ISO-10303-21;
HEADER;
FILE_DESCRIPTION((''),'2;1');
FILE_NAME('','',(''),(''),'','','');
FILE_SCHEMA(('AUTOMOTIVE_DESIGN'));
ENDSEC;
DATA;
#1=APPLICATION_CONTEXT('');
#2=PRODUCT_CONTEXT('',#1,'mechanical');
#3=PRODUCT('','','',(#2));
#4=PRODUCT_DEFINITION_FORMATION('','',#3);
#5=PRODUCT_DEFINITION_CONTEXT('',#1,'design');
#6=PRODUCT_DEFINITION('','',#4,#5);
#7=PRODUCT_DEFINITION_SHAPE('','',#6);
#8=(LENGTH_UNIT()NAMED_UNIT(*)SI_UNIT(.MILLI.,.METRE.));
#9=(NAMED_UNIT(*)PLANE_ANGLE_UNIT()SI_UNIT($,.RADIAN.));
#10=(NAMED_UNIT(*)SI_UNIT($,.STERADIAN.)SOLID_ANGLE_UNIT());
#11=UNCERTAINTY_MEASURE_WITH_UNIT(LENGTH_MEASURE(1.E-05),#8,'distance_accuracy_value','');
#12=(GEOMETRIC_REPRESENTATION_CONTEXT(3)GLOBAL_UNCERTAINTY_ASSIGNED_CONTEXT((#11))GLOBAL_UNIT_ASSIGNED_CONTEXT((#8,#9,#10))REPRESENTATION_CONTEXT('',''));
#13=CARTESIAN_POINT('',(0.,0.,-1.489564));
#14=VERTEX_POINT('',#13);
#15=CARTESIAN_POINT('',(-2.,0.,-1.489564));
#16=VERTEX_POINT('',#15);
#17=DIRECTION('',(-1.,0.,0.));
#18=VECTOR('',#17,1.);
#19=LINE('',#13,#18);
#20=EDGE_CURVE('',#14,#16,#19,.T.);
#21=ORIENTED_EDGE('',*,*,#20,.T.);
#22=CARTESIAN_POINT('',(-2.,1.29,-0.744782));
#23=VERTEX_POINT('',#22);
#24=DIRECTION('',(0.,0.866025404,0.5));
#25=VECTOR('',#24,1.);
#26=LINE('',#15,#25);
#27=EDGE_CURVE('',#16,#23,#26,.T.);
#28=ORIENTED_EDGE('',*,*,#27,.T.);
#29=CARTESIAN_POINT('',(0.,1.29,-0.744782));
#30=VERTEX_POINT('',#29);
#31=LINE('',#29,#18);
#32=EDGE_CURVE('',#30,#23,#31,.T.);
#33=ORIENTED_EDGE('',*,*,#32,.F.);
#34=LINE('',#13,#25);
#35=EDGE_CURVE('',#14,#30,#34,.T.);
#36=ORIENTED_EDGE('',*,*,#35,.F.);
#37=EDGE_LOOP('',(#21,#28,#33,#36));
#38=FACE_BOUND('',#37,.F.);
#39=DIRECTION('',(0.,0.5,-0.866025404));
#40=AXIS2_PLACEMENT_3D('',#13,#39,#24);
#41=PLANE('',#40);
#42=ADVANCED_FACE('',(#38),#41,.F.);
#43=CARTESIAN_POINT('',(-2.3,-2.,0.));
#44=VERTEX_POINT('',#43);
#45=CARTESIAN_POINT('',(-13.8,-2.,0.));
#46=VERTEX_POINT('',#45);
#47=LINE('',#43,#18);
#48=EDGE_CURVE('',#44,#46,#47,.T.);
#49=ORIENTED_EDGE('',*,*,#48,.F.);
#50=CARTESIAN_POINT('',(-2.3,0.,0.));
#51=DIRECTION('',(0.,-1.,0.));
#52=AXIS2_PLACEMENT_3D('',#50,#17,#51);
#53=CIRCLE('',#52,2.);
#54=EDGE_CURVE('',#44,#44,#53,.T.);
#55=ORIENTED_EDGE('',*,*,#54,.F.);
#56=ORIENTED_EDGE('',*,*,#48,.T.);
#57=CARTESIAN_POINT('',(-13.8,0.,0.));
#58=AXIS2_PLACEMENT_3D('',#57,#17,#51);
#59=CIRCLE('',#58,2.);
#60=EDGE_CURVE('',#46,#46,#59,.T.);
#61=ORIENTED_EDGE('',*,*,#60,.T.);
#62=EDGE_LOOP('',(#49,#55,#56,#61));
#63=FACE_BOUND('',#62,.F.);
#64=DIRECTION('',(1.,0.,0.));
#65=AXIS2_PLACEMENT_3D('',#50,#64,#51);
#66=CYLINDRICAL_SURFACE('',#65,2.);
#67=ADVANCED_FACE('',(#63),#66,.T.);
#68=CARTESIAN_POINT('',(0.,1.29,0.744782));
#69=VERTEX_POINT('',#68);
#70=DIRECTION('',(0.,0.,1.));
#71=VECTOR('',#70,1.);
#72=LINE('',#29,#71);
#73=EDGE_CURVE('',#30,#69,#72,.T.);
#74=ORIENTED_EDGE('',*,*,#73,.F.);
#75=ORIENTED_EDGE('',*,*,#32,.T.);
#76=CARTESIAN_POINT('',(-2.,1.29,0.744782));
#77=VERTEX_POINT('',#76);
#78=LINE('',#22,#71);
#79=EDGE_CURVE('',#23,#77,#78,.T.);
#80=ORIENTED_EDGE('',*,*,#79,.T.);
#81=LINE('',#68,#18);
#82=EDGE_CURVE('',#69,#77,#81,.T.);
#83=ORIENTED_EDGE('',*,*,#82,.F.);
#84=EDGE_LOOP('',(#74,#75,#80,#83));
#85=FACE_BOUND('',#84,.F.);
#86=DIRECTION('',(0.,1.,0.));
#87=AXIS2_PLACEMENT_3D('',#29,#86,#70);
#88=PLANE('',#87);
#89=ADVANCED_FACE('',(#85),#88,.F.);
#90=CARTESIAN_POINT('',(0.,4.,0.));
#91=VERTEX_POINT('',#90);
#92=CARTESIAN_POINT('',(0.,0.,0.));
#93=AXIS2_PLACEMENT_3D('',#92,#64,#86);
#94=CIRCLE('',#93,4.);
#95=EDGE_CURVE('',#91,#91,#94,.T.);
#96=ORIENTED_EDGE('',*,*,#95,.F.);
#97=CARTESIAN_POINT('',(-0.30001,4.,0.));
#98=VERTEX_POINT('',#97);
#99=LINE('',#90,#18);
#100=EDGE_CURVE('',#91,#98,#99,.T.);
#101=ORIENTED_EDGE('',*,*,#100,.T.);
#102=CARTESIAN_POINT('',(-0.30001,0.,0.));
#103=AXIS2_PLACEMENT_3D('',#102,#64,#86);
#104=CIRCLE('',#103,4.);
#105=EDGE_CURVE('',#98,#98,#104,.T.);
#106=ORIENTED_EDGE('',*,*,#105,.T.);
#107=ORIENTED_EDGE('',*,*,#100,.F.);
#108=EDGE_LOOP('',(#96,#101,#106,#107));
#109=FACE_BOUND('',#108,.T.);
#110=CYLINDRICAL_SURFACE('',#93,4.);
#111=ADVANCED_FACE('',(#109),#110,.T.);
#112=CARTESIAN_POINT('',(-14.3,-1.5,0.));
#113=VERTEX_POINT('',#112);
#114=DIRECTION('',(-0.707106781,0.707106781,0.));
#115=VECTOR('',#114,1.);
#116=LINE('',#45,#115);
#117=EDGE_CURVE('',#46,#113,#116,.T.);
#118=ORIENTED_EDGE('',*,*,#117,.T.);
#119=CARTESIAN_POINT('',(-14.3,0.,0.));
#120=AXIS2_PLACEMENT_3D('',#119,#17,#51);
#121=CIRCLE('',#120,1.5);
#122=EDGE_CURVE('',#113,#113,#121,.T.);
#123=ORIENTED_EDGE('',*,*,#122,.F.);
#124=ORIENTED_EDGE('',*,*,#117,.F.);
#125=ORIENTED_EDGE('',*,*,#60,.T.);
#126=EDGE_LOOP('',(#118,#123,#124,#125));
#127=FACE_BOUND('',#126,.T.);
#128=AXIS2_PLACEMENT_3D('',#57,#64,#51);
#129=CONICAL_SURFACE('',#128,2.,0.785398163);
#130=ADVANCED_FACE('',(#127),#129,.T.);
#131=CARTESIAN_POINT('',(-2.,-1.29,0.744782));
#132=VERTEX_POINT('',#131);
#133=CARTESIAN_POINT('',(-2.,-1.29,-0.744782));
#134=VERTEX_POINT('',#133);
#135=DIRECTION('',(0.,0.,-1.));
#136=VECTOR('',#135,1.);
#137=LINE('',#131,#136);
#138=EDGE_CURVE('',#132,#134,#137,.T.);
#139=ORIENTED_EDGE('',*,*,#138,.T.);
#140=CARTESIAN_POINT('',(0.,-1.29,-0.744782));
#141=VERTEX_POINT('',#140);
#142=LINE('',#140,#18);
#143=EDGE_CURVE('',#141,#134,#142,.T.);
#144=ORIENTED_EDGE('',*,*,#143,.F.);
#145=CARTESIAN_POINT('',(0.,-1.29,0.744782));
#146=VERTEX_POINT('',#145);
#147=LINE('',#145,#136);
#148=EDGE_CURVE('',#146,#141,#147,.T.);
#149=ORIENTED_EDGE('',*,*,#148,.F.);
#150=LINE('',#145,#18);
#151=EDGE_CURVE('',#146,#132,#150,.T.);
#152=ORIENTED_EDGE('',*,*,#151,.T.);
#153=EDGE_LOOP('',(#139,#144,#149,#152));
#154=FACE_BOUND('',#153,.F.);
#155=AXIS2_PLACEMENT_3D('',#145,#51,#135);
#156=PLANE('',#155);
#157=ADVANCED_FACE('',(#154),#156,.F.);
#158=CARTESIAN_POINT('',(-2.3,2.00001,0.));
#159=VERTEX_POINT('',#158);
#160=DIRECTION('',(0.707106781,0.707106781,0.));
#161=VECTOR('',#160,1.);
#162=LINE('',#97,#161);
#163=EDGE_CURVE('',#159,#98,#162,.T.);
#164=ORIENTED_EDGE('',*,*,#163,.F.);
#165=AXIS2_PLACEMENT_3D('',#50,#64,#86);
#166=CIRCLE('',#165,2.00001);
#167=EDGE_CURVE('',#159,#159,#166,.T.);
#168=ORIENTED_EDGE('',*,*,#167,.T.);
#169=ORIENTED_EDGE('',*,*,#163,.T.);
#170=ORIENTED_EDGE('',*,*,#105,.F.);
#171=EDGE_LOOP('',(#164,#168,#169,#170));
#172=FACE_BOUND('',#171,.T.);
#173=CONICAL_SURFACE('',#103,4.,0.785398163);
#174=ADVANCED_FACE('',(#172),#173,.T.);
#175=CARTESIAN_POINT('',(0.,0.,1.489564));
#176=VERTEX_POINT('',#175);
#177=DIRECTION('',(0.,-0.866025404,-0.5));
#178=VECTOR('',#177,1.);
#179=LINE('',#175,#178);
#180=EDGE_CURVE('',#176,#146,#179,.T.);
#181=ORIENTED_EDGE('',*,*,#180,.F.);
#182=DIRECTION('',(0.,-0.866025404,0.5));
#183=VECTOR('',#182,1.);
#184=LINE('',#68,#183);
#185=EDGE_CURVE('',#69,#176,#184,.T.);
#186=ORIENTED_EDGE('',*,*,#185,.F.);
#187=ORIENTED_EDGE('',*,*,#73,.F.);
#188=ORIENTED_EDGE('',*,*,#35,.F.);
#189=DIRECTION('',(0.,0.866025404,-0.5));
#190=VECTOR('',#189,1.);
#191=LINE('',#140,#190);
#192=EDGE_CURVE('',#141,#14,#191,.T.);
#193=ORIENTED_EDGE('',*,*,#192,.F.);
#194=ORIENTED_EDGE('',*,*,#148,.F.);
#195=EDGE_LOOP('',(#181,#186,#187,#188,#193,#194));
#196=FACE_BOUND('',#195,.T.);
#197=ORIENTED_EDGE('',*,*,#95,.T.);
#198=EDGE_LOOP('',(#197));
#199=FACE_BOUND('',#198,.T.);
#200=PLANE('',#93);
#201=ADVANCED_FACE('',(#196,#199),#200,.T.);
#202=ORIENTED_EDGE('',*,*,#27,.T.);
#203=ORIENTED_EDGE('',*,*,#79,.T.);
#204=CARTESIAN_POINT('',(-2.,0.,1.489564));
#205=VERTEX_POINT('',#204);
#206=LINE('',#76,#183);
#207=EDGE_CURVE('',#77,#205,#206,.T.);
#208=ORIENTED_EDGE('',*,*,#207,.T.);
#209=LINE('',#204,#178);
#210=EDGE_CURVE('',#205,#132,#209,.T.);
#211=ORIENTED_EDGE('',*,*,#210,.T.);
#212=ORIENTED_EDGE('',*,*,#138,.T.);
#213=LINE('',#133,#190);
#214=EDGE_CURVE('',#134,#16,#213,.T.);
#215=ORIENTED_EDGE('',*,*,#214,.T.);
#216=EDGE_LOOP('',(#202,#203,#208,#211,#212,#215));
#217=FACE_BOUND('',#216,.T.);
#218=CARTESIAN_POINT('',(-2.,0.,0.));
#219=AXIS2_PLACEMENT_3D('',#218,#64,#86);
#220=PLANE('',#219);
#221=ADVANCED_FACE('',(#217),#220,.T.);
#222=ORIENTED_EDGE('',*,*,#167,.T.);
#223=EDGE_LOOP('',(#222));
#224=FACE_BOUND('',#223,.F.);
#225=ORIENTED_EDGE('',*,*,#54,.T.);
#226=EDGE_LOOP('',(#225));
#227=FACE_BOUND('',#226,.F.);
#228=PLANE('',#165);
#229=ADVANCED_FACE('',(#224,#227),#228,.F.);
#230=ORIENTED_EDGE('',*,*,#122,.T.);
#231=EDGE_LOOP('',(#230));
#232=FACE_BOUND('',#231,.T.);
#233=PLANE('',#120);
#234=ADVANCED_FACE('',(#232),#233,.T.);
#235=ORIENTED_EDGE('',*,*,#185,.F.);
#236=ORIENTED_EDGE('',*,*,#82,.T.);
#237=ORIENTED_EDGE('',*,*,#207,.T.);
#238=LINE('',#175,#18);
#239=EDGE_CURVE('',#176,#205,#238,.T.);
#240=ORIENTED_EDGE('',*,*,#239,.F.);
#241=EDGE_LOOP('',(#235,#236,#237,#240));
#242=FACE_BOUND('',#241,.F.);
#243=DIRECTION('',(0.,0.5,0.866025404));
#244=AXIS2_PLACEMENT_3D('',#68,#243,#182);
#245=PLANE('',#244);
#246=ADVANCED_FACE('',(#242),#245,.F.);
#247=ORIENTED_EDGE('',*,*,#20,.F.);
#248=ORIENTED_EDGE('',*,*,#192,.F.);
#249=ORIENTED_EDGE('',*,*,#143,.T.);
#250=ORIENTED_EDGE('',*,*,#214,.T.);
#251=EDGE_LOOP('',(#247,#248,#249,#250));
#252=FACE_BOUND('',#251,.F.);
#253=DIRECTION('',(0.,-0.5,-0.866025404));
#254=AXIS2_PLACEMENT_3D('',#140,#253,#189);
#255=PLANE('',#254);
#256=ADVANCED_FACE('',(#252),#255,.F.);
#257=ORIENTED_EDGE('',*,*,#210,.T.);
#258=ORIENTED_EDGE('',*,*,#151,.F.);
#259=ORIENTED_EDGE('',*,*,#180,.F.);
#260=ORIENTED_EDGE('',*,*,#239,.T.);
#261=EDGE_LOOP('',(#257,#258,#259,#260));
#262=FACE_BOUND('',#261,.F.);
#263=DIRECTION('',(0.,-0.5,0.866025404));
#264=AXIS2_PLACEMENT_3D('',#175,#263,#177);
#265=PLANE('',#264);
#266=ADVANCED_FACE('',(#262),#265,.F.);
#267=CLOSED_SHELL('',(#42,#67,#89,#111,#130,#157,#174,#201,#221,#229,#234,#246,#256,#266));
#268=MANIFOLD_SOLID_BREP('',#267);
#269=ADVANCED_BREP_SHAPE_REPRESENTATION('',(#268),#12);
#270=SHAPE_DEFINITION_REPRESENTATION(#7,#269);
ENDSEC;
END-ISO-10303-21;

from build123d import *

# Parameters (mm, degrees)
F0_R     = 4
F1_DEPTH = 2.3
F2_R     = 2
F3_DEPTH = 12
F4_SIZE  = 0.5
F5_SIZE2 = 1.99999
F5_SIZE  = 1.99999
F7_DEPTH = 2


# Not quite as in the source:
# - a fillet or chamfer is up to 0.001 mm smaller than in the source, because OpenCascade refuses the exact size


with BuildPart() as f1:
    # F0 (on Right) → F1 (new body)
    with BuildSketch(Plane.YZ):
        Circle(F0_R)
    extrude(amount=-F1_DEPTH)

    # F2 (on face) → F3 (join)
    with BuildSketch(Plane(origin=(-2.3, 0, 0), x_dir=(0, -1, 0), z_dir=(-1, 0, 0))):
        Circle(F2_R)
    extrude(amount=F3_DEPTH)

    # F4
    f4_edges = [f1.edges().sort_by_distance(p)[0] for p in [
        (-14.3, 2, 0),
    ]]
    chamfer(f4_edges, length=F4_SIZE)

    # F5 (size 2 and 2 in the source; OpenCascade refuses exactly that, so slightly less here)
    f5_edges = [f1.edges().sort_by_distance(p)[0] for p in [
        (-2.3, -4, 0),
    ]]
    chamfer(f5_edges, length=F5_SIZE, length2=F5_SIZE2)

    # F6 (on face) → F7 (cut)
    with BuildSketch(Plane.YZ):
        Polygon((0, -1.4895636945), (1.29, -0.7447818473), (1.29, 0.7447818473), (0, 1.4895636945), (-1.29, 0.7447818473), (-1.29, -0.7447818473), align=None)
    extrude(amount=-F7_DEPTH, mode=Mode.SUBTRACT)


solid = f1.part
